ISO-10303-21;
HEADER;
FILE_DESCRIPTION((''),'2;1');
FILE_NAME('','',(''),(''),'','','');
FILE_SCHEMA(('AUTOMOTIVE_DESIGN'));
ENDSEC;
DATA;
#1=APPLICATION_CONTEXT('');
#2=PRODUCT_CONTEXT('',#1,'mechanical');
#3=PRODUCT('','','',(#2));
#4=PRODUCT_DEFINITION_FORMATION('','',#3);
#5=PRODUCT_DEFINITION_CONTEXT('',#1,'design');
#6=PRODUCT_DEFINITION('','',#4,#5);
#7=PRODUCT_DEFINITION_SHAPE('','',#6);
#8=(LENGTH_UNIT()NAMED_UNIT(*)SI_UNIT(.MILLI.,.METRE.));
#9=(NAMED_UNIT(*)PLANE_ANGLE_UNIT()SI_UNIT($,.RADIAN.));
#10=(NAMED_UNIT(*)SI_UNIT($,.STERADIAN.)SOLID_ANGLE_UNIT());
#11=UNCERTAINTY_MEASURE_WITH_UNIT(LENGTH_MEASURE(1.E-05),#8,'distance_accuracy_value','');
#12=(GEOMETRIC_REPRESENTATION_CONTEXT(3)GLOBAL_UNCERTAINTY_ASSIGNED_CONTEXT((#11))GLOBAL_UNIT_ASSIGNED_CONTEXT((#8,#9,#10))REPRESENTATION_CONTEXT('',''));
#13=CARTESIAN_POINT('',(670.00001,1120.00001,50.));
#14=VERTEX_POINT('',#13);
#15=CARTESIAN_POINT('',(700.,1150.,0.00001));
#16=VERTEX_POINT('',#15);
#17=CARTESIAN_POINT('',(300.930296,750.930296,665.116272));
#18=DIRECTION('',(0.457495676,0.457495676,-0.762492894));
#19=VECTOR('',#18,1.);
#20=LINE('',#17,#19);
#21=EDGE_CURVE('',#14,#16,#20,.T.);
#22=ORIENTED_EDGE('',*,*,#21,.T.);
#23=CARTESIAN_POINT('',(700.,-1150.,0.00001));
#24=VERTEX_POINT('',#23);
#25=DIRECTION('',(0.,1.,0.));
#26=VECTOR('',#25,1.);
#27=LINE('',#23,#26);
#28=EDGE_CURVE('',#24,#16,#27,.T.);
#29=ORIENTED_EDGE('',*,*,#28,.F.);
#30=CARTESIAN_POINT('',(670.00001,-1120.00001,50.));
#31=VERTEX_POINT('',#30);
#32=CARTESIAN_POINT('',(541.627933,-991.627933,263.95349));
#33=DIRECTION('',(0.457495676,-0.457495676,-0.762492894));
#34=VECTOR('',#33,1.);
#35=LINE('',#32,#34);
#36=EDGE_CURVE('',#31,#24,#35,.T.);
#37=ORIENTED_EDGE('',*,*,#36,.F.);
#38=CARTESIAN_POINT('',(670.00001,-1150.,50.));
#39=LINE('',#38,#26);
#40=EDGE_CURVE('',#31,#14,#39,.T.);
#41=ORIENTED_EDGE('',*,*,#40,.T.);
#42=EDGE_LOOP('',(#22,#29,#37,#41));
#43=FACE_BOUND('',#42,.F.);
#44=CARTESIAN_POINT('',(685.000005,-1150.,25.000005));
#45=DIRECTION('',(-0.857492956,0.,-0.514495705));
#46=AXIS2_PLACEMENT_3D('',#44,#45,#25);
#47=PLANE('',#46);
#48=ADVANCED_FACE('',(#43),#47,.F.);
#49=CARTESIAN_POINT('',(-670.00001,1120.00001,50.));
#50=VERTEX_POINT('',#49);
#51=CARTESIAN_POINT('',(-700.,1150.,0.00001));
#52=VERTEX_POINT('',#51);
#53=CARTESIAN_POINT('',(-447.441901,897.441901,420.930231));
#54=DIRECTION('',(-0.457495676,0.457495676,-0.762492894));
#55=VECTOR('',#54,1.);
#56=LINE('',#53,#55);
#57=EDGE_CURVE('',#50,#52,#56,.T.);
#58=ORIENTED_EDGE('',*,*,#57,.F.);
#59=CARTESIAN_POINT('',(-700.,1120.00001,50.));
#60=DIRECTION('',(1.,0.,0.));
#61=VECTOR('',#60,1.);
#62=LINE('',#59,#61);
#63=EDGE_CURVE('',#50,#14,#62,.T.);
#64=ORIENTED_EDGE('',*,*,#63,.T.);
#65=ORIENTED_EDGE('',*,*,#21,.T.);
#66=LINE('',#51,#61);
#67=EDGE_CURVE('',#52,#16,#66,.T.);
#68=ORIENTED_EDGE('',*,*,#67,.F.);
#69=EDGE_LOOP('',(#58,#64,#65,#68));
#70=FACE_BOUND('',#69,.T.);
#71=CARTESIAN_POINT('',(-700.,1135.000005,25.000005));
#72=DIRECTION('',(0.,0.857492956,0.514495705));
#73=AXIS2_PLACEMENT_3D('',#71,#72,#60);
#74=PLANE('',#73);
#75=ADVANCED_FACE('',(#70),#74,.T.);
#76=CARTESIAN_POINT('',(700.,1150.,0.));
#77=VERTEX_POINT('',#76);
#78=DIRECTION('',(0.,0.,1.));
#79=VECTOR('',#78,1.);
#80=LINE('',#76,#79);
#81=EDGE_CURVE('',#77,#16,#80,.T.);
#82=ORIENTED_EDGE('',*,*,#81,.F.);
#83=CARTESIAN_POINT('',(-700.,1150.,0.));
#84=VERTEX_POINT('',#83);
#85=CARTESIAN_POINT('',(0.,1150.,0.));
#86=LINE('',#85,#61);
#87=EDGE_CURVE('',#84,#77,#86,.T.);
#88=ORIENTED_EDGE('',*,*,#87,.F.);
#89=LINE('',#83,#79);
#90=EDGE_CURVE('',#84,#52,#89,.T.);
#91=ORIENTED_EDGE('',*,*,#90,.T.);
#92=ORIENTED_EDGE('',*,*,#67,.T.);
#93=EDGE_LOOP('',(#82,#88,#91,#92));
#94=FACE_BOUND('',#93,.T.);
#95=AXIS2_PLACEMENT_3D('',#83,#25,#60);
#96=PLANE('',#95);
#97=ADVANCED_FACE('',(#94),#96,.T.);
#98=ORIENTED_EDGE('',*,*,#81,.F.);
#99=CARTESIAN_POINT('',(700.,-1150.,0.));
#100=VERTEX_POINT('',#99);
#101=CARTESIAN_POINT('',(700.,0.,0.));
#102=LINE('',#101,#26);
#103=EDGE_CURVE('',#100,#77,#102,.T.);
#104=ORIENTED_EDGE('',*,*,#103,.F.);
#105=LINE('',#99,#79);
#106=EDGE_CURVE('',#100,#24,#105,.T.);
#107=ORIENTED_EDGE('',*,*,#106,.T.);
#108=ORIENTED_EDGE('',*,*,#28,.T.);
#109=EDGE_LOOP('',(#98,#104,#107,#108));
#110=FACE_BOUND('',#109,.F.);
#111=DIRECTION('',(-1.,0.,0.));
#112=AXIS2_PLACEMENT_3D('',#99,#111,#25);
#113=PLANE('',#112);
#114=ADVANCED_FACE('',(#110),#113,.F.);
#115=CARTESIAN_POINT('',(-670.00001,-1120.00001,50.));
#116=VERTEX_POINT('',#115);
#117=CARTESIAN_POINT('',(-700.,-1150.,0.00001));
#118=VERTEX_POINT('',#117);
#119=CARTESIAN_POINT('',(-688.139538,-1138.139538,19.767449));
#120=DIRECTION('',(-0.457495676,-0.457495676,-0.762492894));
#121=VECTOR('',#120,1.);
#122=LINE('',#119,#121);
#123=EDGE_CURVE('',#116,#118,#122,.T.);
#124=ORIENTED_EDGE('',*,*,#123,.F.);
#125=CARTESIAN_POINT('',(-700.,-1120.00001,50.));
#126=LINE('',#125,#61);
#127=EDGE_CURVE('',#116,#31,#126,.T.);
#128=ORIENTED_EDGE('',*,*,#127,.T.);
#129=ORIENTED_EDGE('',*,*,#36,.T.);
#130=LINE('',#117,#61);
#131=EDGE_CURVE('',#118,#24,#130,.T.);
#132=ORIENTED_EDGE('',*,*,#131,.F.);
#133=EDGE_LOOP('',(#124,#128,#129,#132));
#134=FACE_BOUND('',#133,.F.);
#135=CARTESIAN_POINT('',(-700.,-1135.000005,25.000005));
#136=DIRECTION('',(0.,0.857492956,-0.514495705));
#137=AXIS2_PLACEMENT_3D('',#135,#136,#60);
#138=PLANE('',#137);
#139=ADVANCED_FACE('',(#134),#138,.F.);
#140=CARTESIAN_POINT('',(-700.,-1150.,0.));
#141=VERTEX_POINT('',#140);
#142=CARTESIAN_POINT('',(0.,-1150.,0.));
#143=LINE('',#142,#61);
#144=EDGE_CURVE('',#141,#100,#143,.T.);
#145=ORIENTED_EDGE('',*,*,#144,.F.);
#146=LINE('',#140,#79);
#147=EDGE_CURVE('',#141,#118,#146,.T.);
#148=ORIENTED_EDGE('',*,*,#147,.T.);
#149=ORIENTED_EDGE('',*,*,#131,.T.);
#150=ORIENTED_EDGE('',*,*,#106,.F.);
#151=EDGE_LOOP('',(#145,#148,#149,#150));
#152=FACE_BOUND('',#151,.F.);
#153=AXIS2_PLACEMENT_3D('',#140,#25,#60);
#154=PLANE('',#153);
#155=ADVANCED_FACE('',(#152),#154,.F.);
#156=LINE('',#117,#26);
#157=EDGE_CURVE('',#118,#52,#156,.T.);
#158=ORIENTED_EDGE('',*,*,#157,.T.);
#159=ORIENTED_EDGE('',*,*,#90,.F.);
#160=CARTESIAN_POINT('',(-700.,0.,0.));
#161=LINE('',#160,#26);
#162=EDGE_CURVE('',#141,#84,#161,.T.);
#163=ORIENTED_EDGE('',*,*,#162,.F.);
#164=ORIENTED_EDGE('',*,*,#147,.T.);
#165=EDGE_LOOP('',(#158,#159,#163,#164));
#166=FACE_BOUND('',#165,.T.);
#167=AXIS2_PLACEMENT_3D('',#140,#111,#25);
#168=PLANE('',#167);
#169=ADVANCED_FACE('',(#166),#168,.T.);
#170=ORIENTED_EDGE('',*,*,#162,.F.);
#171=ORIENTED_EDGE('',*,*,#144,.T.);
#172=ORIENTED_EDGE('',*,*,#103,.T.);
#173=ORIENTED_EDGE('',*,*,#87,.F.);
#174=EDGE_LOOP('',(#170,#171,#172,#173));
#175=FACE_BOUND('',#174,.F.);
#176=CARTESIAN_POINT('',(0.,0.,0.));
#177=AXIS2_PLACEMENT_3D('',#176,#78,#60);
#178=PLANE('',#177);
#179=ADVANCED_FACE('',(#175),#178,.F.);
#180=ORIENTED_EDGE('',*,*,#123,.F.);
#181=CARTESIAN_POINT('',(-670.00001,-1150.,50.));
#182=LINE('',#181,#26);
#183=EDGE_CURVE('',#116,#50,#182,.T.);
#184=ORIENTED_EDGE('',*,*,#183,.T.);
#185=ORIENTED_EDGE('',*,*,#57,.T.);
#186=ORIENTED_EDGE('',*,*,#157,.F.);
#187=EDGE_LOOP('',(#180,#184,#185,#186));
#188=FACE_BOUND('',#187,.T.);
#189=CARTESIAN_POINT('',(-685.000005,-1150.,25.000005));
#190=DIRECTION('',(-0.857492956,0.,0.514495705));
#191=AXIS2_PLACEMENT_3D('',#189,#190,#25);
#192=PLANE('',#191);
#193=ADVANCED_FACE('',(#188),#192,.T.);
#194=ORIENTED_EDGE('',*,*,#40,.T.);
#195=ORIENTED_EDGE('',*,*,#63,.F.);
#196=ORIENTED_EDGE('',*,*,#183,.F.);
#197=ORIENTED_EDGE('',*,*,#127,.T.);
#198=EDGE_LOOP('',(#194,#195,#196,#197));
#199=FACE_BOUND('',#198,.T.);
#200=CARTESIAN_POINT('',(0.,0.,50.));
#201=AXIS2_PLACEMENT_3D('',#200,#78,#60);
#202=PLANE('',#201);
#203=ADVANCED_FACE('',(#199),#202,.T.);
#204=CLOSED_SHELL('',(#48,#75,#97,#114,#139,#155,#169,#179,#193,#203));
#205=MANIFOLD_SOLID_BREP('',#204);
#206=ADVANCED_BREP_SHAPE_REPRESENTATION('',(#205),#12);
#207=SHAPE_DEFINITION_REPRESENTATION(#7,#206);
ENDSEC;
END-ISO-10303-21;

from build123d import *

# Parameters (mm, degrees)
F0_W     = 1400
F0_H     = 2300
F1_DEPTH = 50
F2_SIZE2 = 49.99999
F2_SIZE  = 29.99999


# Not quite as in the source:
# - a fillet or chamfer is up to 0.001 mm smaller than in the source, because OpenCascade refuses the exact size


with BuildPart() as f1:
    # F0 (on Top) → F1 (new body)
    with BuildSketch(Plane.XY):
        Rectangle(F0_W, F0_H)
    extrude(amount=F1_DEPTH)

    # F2 (size 30 and 50 in the source; OpenCascade refuses exactly that, so slightly less here)
    f2_edges = [f1.edges().sort_by_distance(p)[0] for p in [
        (0, -1150, 50),
        (700, 0, 50),
        (0, 1150, 50),
        (-700, 0, 50),
    ]]
    f2_side = f1.faces().sort_by_distance((0, 0, 50))[0]
    chamfer(f2_edges, length=F2_SIZE, length2=F2_SIZE2, reference=f2_side)


solid = f1.part
